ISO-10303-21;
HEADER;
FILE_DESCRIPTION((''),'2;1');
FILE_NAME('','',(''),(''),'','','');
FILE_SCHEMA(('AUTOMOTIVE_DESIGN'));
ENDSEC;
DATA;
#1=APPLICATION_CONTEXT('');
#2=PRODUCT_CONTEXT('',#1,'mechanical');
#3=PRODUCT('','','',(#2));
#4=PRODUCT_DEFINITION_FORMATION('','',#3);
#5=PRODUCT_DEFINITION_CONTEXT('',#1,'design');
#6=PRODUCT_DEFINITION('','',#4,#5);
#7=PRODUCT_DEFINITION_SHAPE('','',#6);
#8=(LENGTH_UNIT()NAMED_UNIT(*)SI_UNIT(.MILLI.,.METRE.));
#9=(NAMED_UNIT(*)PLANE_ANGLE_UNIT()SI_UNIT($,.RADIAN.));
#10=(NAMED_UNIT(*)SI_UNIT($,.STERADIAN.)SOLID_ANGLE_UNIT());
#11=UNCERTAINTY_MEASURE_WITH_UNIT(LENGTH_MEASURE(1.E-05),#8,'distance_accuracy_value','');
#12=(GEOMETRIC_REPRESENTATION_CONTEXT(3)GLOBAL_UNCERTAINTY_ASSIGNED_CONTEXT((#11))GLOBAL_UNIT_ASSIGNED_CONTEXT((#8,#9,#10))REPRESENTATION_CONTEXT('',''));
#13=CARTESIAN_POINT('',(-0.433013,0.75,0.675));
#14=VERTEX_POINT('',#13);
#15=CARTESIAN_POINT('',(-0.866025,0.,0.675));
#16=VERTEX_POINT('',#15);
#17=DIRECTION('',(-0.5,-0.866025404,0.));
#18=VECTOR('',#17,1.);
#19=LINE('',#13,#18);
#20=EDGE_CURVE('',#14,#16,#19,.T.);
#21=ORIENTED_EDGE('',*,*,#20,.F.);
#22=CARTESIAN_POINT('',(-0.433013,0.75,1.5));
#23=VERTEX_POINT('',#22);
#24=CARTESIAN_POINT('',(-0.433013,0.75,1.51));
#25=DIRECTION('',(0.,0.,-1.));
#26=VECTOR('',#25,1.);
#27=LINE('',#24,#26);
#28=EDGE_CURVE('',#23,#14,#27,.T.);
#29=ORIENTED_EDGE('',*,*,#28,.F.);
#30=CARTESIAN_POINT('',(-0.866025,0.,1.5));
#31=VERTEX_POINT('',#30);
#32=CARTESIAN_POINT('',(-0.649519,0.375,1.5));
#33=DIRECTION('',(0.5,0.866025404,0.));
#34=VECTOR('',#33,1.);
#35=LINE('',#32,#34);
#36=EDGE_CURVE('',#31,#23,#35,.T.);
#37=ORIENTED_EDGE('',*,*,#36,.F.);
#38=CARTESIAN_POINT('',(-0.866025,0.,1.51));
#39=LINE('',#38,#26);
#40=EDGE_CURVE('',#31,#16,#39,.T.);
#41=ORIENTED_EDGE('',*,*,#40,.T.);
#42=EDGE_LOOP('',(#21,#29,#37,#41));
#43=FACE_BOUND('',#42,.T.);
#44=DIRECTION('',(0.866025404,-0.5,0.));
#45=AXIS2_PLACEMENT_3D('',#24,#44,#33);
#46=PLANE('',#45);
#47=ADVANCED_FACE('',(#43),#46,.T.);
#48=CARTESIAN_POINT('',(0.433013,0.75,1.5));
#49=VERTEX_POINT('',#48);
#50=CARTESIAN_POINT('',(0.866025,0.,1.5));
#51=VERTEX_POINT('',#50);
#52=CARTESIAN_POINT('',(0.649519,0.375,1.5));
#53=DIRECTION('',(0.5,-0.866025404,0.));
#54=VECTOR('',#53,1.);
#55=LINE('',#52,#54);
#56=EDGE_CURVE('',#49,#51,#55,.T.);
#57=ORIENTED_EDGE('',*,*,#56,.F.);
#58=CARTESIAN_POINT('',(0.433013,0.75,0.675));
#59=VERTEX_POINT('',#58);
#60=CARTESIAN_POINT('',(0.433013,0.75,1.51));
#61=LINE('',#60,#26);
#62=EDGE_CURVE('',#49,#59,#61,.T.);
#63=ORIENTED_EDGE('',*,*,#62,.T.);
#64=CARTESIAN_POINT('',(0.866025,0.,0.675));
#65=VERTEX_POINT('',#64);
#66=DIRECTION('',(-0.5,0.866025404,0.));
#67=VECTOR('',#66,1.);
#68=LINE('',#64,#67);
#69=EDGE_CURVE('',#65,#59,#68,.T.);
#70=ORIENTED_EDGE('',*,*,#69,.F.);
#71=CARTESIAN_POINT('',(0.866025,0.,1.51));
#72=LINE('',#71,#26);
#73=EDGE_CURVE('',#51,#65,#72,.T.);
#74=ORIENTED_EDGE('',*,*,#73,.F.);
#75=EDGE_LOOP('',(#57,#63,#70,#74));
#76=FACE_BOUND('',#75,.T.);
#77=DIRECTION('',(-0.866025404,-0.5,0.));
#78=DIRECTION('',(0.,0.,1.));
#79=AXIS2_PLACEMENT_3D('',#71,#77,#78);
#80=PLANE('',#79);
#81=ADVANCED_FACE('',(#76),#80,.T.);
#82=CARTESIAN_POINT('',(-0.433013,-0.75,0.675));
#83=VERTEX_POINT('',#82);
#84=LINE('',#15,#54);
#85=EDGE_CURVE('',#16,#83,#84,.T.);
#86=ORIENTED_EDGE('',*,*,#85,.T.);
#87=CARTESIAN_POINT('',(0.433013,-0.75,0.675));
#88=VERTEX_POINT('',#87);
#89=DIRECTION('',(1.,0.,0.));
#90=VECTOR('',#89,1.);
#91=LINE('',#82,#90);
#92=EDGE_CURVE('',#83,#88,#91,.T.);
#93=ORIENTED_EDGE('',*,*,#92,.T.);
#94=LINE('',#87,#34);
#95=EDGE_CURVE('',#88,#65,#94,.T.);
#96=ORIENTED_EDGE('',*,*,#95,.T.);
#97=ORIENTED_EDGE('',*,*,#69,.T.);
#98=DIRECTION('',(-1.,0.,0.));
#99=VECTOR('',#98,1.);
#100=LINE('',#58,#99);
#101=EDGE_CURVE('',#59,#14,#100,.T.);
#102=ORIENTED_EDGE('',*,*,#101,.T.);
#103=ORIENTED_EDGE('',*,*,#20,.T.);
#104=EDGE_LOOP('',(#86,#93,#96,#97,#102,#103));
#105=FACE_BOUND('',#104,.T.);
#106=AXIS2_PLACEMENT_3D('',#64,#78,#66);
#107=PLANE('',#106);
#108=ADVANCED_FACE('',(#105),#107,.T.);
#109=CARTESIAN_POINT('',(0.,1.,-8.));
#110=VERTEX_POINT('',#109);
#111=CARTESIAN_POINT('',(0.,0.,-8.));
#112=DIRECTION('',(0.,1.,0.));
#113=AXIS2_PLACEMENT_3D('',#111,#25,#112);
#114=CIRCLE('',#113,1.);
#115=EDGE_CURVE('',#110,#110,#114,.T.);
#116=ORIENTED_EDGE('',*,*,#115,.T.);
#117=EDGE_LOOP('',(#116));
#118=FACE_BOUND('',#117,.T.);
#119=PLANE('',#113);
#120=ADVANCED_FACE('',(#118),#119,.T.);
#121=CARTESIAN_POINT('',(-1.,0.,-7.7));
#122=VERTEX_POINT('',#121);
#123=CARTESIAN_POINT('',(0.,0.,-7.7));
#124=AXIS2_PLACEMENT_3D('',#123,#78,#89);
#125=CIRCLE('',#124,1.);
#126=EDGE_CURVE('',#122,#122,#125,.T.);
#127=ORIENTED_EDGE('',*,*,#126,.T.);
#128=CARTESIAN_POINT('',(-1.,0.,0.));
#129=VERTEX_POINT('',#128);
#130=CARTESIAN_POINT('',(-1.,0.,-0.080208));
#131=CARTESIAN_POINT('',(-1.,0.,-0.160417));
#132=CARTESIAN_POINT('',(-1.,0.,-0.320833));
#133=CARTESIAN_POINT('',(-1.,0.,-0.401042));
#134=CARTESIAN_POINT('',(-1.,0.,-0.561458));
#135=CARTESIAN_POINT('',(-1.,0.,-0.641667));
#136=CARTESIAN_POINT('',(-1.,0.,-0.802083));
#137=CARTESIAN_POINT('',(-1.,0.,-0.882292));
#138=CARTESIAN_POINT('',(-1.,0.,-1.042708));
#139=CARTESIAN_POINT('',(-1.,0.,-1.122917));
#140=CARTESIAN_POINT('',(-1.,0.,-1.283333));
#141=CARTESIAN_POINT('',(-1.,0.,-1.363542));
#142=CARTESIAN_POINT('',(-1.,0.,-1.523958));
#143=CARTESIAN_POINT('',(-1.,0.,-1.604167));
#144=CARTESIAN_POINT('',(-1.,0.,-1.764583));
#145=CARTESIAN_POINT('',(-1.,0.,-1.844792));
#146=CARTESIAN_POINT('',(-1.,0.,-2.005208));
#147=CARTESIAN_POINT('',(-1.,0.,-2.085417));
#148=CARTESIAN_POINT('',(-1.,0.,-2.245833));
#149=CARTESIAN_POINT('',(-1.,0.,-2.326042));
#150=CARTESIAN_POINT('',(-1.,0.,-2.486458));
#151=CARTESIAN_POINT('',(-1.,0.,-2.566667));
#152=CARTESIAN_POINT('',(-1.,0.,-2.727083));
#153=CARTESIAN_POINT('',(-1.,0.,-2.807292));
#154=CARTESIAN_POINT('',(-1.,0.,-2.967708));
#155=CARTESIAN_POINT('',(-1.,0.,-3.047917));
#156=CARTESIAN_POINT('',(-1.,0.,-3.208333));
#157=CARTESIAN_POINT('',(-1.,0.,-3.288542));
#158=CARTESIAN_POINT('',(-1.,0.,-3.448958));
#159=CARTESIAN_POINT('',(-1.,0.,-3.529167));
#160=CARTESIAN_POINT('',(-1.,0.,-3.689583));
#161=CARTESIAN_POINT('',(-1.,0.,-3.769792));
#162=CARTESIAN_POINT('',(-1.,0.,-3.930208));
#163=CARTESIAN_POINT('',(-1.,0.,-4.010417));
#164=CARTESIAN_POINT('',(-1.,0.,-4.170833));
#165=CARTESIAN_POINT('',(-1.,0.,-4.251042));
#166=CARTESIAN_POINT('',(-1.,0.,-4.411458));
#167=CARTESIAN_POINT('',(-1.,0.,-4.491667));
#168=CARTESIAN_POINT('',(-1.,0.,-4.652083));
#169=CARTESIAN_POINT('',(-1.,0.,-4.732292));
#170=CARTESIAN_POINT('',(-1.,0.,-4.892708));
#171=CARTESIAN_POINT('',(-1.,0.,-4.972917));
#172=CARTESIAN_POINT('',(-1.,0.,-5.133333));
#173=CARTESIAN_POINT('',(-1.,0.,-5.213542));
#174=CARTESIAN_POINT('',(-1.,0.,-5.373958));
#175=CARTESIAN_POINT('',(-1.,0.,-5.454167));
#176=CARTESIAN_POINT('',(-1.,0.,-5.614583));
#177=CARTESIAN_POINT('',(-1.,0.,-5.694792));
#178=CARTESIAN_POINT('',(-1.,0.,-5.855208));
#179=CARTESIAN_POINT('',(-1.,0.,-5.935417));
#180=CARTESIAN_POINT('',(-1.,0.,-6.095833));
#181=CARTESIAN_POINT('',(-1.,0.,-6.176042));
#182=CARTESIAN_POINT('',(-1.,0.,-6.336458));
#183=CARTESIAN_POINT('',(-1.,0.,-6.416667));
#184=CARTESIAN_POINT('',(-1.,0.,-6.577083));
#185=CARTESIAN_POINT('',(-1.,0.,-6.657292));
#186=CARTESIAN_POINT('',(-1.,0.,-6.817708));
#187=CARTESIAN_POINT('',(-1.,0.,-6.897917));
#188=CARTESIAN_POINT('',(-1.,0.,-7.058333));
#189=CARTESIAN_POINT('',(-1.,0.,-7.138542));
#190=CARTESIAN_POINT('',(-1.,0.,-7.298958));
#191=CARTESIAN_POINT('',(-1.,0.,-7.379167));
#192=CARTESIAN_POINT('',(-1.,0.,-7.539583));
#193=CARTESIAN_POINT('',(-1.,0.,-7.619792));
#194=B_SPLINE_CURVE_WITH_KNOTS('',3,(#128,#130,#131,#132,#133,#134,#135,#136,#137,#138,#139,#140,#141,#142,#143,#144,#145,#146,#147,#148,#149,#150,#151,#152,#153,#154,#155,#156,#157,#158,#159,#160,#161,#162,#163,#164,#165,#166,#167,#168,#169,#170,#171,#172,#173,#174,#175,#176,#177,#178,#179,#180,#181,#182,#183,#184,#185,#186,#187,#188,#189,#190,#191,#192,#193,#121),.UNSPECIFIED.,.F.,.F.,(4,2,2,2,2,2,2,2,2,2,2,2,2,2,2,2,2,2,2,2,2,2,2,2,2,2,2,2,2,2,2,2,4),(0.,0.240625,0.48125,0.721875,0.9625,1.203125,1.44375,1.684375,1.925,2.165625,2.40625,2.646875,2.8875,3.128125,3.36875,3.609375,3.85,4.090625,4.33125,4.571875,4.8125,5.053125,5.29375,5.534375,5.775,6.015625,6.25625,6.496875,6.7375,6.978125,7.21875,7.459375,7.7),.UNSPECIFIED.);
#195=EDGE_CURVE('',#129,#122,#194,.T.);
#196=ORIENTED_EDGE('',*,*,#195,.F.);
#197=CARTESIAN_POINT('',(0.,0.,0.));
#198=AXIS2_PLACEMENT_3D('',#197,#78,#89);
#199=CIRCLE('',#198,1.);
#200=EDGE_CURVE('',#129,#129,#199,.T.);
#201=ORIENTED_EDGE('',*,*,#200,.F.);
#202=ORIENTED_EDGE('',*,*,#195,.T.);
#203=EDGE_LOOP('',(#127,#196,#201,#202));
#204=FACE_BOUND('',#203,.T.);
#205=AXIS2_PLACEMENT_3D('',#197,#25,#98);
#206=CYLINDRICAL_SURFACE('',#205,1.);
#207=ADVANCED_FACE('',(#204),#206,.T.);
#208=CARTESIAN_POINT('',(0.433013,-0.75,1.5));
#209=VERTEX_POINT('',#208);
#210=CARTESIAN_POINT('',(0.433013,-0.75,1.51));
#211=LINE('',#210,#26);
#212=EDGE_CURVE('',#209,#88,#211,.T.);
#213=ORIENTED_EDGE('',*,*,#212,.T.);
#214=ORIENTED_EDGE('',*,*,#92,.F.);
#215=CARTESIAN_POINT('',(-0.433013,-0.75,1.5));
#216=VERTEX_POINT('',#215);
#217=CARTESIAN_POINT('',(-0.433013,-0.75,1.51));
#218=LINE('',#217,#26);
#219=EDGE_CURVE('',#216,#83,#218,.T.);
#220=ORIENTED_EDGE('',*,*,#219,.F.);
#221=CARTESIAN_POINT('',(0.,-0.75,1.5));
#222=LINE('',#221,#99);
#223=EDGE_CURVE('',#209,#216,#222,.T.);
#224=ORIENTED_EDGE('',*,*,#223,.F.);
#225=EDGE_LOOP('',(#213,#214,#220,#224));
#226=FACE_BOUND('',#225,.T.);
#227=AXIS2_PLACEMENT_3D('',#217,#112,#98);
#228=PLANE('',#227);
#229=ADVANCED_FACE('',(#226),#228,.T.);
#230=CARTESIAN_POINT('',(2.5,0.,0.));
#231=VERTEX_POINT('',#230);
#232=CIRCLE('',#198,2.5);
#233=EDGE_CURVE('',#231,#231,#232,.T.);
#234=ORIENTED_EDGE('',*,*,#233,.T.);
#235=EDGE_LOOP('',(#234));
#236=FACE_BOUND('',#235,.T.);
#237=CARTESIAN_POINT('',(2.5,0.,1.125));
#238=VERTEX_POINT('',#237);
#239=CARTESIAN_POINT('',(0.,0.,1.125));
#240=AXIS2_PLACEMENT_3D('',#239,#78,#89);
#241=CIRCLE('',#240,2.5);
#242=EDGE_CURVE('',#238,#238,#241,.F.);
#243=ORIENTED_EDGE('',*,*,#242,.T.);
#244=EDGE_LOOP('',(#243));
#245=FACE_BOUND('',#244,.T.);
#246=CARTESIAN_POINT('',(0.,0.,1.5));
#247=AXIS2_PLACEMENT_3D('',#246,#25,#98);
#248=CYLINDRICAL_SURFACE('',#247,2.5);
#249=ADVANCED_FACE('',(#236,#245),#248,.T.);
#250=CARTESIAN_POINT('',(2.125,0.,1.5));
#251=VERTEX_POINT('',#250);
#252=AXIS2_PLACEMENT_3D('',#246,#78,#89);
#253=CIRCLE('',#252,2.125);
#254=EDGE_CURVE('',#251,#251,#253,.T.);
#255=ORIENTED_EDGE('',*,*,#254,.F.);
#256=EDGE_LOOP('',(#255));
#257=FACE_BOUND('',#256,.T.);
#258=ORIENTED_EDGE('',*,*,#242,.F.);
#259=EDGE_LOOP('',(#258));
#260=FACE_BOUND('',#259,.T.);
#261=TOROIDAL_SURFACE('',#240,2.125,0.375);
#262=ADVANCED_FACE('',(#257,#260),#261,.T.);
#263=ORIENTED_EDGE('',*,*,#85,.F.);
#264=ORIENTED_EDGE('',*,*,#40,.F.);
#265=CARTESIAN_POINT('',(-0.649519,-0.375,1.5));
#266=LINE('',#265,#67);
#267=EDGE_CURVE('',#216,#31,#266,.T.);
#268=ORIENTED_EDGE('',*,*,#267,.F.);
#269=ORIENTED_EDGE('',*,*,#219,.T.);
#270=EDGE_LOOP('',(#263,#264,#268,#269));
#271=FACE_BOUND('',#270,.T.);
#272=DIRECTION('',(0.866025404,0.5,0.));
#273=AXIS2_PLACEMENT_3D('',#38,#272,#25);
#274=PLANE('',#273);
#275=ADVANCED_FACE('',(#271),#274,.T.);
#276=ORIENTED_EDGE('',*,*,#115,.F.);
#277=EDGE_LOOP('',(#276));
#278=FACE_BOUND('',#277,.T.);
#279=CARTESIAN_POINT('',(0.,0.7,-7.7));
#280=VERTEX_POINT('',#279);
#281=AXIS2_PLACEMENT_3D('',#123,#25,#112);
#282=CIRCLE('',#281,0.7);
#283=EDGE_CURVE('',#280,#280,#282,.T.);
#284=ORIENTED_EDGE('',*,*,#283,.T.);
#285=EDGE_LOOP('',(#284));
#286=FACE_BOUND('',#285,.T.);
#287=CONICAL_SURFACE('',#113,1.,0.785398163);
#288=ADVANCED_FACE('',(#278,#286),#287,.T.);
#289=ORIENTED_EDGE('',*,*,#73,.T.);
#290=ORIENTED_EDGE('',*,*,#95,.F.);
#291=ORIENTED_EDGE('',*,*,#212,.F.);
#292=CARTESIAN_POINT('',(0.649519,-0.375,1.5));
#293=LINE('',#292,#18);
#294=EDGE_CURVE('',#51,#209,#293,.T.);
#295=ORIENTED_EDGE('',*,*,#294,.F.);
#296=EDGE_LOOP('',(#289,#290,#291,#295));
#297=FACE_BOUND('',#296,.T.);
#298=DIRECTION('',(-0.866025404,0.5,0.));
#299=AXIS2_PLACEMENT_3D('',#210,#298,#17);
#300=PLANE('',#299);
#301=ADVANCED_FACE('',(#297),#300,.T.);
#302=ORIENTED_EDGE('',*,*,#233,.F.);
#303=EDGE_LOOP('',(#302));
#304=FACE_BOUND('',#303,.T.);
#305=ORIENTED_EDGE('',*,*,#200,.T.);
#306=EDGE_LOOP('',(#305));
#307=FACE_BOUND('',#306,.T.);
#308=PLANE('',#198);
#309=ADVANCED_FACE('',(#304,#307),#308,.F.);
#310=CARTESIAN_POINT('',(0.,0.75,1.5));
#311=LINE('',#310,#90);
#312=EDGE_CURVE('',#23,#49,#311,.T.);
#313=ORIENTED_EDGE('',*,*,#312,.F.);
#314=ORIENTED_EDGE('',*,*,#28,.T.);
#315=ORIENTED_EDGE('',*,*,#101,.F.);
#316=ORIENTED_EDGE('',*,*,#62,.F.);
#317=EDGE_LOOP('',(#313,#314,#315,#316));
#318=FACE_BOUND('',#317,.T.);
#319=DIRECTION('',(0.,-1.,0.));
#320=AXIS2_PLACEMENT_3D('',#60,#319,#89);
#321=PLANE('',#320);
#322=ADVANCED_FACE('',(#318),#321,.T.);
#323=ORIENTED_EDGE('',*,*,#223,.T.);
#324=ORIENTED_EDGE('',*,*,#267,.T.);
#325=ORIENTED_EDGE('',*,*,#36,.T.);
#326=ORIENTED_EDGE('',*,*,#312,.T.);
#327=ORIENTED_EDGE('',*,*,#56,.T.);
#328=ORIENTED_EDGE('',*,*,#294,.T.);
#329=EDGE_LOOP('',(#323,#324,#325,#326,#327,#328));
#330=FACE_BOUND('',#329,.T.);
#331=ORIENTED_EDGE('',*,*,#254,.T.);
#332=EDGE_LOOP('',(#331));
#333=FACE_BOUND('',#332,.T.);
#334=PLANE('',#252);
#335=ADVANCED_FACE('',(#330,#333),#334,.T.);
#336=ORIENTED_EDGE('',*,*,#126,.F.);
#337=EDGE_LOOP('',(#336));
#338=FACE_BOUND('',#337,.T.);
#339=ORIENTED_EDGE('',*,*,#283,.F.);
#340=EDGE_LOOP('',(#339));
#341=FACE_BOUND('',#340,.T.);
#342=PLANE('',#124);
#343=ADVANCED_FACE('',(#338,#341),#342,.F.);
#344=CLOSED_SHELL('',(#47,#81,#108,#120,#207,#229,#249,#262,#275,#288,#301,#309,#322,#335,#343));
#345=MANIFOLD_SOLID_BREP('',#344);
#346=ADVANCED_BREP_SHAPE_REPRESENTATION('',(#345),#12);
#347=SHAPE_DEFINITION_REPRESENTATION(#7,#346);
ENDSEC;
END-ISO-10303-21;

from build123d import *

# Parameters (mm, degrees)
F_0150_CYLINDER_SKETCH_R    = 2.5
F_0150_CYLINDER_DEPTH       = 1.5
F_0151_FILLET_R             = 0.375
F_0152_EXTRUDE_DEPTH        = 0.835
F_0152_EXTRUDE_ROTATE_ANGLE = 120
F_0155_CYLINDER_SKETCH_R    = 1
F_0155_CYLINDER_DEPTH       = 7.7
F_0156_CONE_ROTATE_ANGLE    = 90


with BuildPart() as part:
    # 0150_cylinder_Sketch → 0150_cylinder (new body)
    with BuildSketch(Plane.XY):
        Circle(F_0150_CYLINDER_SKETCH_R)
    extrude(amount=F_0150_CYLINDER_DEPTH)

    # 0151_fillet
    f_0151_fillet_edges = [part.edges().sort_by_distance(p)[0] for p in [
        (-2.5, 0, 1.5),
    ]]
    fillet(f_0151_fillet_edges, radius=F_0151_FILLET_R)


with BuildPart() as body_2:
    # 0152_extrude_Sketch → 0152_extrude (new body)
    with BuildSketch(Plane.XY):
        Polygon((0, 0), (0.866025404, 0), (1.299038106, 0.75), (0.866025404, 1.5), (0, 1.5), (-0.433012702, 0.75), align=None)
    extrude(amount=F_0152_EXTRUDE_DEPTH)


with BuildPart() as body_2_1:
    # 0152_extrude_Rotate: read off the stored shape, not the designer's step
    # 0152_extrude_Rotate: moved
    add(body_2.part.rotate(Axis((0, 0, 0), (0, 0, 1)), F_0152_EXTRUDE_ROTATE_ANGLE))


with BuildPart() as body_2_2:
    # 0152_extrude_Translate: moved
    add(body_2_1.part.moved(Location((0.866025404, 0, 0.675))))


with BuildPart() as part_1:
    add(part.part)

    # 0154_sub: cut body 2
    add(body_2_2.part, mode=Mode.SUBTRACT)


with BuildPart() as body_2_2_1:
    # 0155_cylinder_Sketch → 0155_cylinder (new body)
    with BuildSketch(Plane.XY):
        with Locations(Location((0, 0, 0), (0, 0, 180))):
            Circle(F_0155_CYLINDER_SKETCH_R)
    extrude(amount=F_0155_CYLINDER_DEPTH)


with BuildPart() as body_2_2_2:
    # 0155_cylinder_Translate: moved
    add(body_2_2_1.part.moved(Location((0, 0, -7.7))))


with BuildPart() as body_3:
    # 0156_cone_Sketch → 0156_cone (revolve)
    with BuildSketch(Plane.XY, mode=Mode.PRIVATE) as f_0156_cone_sk:
        Polygon((0, 0), (1, 0), (0.7, 0.3), (0, 0.3), align=None)
    revolve(f_0156_cone_sk.sketch.rotate(Axis((0, -100, 0), (0, 1, 0)), 90), axis=Axis((0, -100, 0), (0, 1, 0)))


with BuildPart() as body_3_1:
    # 0156_cone_Rotate: moved
    add(body_3.part.rotate(Axis((0, 0, 0), (1, 0, 0)), F_0156_CONE_ROTATE_ANGLE))


with BuildPart() as body_3_2:
    # 0156_cone_Translate: moved
    add(body_3_1.part.moved(Location((0, 0, -8))))


with BuildPart() as body_2_2_3:
    add(body_2_2_2.part)

    # 0158_add: union body 3
    add(body_3_2.part)


with BuildPart() as part_2:
    add(part_1.part)

    # 0159_add: union body 2 2
    add(body_2_2_3.part)


solid = part_2.part
